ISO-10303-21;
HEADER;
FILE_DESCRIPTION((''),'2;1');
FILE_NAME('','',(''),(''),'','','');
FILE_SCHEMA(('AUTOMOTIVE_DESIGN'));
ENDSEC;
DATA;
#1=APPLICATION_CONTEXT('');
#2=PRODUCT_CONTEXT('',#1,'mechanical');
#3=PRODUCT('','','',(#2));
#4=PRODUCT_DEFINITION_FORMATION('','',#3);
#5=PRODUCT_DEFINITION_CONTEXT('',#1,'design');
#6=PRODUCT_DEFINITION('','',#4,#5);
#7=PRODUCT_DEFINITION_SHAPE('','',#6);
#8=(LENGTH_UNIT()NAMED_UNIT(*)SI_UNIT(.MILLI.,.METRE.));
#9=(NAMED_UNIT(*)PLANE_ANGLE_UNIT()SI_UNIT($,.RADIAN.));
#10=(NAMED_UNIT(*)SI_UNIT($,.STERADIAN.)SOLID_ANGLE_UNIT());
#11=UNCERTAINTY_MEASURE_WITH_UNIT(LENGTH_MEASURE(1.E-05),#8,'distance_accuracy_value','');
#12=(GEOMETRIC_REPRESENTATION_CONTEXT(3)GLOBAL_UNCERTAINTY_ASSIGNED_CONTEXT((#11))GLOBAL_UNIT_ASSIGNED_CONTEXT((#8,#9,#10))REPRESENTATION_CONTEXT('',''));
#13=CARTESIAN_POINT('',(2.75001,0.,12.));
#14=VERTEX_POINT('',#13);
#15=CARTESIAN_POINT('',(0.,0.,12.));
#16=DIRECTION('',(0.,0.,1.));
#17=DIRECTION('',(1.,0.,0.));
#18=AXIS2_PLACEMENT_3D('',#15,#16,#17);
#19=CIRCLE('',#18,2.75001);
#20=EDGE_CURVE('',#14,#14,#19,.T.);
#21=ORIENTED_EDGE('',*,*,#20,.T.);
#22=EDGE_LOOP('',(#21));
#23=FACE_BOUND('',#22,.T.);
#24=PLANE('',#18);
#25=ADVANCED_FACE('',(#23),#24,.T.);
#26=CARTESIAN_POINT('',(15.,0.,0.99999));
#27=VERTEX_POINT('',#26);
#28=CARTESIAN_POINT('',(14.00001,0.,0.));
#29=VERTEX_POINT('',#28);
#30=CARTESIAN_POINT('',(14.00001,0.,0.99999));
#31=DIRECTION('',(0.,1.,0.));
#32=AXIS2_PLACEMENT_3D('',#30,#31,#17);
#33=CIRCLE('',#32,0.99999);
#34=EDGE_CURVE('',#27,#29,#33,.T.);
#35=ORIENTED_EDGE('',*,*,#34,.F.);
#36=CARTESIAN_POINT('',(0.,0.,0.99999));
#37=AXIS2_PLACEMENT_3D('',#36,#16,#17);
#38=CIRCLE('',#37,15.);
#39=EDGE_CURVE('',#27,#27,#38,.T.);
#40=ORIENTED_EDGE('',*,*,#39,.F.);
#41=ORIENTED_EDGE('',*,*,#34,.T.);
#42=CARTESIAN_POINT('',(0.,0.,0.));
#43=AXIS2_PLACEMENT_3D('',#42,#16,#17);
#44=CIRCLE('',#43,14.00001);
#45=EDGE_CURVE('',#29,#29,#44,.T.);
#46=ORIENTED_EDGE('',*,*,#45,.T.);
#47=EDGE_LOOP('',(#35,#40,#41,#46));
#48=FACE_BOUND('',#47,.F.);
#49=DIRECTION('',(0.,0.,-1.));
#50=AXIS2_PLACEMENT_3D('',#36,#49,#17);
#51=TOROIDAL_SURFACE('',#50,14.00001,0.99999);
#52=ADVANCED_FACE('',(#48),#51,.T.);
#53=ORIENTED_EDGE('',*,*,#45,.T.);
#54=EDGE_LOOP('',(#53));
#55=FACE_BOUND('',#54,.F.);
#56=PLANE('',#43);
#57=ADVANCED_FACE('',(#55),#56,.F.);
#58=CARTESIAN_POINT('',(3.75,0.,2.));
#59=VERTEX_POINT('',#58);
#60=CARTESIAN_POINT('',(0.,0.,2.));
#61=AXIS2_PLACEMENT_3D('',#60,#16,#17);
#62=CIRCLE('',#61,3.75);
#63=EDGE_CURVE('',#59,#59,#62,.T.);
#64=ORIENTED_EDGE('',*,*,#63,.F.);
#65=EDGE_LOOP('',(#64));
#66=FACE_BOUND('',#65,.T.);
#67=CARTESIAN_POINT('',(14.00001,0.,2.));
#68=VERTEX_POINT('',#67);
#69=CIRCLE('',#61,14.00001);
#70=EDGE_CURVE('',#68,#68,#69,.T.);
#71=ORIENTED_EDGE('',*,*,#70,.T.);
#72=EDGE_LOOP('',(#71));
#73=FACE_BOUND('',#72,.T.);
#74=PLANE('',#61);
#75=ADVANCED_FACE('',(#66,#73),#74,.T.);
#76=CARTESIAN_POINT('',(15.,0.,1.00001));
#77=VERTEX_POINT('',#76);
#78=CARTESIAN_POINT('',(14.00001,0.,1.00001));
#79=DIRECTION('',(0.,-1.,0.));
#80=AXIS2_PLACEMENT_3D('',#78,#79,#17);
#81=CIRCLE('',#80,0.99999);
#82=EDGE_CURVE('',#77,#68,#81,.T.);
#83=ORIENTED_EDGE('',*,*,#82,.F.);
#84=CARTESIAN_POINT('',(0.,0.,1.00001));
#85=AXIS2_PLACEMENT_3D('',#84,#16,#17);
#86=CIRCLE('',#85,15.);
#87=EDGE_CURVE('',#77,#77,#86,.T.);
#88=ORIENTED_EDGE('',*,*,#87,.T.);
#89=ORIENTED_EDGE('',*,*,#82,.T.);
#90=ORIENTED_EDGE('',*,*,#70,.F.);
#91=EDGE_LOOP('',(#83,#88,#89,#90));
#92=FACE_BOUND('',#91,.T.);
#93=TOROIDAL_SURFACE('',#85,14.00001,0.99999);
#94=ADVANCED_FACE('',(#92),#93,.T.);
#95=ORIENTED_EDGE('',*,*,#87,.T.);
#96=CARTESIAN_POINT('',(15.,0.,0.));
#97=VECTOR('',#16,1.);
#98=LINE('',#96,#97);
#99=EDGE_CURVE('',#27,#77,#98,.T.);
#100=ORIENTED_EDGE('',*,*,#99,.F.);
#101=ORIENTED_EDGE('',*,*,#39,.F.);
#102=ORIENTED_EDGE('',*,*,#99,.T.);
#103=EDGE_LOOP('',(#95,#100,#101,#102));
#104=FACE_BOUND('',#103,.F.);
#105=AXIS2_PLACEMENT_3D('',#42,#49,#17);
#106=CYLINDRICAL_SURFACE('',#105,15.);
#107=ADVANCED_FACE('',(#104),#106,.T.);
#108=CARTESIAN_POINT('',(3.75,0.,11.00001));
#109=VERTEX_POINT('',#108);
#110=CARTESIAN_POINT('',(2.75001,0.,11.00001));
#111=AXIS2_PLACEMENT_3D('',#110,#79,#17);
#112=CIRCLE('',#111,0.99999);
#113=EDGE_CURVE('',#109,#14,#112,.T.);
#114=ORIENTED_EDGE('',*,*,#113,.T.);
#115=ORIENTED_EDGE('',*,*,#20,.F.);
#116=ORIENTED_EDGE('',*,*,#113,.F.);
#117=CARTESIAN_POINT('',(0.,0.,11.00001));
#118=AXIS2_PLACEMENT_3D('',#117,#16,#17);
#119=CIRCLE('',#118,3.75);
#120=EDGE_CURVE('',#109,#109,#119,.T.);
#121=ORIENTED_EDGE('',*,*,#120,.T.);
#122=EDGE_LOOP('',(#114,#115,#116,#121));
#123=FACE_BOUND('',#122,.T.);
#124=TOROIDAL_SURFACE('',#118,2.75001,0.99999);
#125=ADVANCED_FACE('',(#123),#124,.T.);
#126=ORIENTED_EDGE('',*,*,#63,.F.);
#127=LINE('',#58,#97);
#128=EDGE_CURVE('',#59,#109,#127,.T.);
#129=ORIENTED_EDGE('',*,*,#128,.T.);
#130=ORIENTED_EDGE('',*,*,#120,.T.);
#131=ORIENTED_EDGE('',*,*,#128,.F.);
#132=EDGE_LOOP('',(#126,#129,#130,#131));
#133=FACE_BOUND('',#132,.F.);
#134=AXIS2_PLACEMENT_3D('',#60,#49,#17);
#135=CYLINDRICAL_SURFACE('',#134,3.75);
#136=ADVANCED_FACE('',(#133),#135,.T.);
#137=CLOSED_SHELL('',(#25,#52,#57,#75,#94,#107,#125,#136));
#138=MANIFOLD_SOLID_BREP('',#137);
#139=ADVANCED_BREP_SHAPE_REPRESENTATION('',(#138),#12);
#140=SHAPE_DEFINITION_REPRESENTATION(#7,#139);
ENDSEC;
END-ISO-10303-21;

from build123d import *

# Parameters (mm, degrees)
F0_R     = 15
F1_DEPTH = 2
F2_R     = 3.75
F3_DEPTH = 10
F4_R     = 0.99999


# Not quite as in the source:
# - a fillet or chamfer is up to 0.001 mm smaller than in the source, because OpenCascade refuses the exact size


with BuildPart() as f1:
    # F0 (on Top) → F1 (new body)
    with BuildSketch(Plane.XY):
        Circle(F0_R)
    extrude(amount=F1_DEPTH)

    # F2 (on face) → F3 (join)
    with BuildSketch(Plane.XY.offset(2)):
        Circle(F2_R)
    extrude(amount=F3_DEPTH)

    # F4 (radius 1 in the source; OpenCascade refuses exactly that, so slightly less here)
    f4_edges = [f1.edges().sort_by_distance(p)[0] for p in [
        (-3.75, 0, 12),
        (15, 0, 1),
        (-15, 0, 0),
        (-15, 0, 2),
    ]]
    fillet(f4_edges, radius=F4_R)


solid = f1.part
